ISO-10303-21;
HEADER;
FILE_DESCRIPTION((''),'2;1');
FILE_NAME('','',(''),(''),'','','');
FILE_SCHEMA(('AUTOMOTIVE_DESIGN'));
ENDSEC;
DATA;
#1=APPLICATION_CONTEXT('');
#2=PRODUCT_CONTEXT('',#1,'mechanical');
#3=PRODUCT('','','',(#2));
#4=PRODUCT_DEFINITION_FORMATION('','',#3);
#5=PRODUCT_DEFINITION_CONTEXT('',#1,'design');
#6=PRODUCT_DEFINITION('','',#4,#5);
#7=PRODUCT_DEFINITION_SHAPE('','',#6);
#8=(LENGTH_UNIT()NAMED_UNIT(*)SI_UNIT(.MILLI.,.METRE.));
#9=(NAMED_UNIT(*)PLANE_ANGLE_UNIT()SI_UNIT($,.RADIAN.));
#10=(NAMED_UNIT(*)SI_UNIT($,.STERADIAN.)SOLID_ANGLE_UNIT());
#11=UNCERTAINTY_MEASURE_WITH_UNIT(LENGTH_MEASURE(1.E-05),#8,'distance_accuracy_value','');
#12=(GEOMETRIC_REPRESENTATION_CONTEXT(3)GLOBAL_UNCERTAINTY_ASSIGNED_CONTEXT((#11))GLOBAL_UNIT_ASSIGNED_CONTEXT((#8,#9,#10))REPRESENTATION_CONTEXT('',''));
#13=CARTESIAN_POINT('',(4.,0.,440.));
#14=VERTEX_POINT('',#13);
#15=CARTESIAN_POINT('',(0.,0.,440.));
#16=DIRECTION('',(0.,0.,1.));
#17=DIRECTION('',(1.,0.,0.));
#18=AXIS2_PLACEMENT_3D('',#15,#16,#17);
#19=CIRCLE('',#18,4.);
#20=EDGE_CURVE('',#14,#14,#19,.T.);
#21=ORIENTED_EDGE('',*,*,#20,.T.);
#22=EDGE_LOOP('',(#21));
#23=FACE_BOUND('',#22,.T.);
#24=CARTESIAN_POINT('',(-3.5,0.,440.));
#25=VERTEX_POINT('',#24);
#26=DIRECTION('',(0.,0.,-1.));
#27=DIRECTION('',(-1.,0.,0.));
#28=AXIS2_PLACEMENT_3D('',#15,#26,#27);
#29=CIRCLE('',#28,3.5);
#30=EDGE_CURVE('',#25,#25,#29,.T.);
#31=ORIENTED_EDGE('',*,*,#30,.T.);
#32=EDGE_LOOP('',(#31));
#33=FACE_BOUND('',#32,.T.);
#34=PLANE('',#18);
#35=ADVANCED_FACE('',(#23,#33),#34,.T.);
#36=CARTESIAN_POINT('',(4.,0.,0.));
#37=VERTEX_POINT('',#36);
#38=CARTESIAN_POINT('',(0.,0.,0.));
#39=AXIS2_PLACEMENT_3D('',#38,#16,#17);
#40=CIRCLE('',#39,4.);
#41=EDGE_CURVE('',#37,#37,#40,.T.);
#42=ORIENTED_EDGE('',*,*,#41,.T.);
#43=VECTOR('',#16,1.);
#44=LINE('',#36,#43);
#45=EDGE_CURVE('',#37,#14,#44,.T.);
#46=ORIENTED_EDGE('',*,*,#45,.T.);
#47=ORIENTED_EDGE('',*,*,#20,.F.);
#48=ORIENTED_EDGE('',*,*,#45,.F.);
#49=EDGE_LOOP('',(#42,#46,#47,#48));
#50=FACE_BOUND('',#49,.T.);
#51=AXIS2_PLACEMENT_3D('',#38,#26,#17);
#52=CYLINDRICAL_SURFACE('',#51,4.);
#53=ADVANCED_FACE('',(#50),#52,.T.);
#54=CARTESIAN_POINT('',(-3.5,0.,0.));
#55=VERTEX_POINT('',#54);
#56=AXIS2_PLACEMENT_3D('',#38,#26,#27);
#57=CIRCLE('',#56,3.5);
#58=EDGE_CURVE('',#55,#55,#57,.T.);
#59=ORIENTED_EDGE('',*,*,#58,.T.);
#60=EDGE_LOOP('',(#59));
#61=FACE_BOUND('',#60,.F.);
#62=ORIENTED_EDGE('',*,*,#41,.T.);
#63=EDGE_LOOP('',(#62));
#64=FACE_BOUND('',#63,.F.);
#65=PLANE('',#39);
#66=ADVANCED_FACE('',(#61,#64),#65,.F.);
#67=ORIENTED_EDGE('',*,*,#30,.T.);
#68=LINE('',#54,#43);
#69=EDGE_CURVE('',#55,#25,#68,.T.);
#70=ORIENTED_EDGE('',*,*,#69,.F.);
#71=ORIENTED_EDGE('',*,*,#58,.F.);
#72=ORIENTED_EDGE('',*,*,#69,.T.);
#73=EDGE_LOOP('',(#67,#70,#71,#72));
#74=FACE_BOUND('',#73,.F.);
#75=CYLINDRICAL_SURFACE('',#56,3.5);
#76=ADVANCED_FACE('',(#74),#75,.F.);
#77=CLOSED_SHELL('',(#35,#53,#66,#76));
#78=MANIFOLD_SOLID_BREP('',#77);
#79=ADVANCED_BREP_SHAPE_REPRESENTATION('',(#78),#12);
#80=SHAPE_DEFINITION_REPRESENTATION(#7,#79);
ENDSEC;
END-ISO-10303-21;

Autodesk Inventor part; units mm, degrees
ref_plane "YZ Plane" through (0, 0, 0) normal (1, 0, 0) x (0, 1, 0)
ref_plane "XZ Plane" through (0, 0, 0) normal (0, 1, 0) x (-1, 0, 0)
ref_plane "XY Plane" through (0, 0, 0) normal (0, 0, 1) x (1, 0, 0)
sketch "Skizze1" plane through (0, 0, 0) normal (0, 0, 1) x (1, 0, 0)
  circle A0 centre (0, 0) radius 4
  dimension "d0" = 8
extrude "Extrusion1" add sketch "Skizze1" along normal blind 440
sketch "Skizze4" plane through (0, 0, 0) normal (0, 0, -1) x (-1, 0, 0)
  circle A0 centre (0, 0) radius 4 projected
  circle A1 centre (0, 0) radius 3.5
  dimension "d13" = 7
extrude "Extrusion2" cut sketch "Skizze4" against normal blind 540 contours A1
thread "Gewinde4" size "M7x0.5" class "6H" standard "ANSI Metric M Profile" length 15
properties part number "Probenstab" material "Edelstahl"
